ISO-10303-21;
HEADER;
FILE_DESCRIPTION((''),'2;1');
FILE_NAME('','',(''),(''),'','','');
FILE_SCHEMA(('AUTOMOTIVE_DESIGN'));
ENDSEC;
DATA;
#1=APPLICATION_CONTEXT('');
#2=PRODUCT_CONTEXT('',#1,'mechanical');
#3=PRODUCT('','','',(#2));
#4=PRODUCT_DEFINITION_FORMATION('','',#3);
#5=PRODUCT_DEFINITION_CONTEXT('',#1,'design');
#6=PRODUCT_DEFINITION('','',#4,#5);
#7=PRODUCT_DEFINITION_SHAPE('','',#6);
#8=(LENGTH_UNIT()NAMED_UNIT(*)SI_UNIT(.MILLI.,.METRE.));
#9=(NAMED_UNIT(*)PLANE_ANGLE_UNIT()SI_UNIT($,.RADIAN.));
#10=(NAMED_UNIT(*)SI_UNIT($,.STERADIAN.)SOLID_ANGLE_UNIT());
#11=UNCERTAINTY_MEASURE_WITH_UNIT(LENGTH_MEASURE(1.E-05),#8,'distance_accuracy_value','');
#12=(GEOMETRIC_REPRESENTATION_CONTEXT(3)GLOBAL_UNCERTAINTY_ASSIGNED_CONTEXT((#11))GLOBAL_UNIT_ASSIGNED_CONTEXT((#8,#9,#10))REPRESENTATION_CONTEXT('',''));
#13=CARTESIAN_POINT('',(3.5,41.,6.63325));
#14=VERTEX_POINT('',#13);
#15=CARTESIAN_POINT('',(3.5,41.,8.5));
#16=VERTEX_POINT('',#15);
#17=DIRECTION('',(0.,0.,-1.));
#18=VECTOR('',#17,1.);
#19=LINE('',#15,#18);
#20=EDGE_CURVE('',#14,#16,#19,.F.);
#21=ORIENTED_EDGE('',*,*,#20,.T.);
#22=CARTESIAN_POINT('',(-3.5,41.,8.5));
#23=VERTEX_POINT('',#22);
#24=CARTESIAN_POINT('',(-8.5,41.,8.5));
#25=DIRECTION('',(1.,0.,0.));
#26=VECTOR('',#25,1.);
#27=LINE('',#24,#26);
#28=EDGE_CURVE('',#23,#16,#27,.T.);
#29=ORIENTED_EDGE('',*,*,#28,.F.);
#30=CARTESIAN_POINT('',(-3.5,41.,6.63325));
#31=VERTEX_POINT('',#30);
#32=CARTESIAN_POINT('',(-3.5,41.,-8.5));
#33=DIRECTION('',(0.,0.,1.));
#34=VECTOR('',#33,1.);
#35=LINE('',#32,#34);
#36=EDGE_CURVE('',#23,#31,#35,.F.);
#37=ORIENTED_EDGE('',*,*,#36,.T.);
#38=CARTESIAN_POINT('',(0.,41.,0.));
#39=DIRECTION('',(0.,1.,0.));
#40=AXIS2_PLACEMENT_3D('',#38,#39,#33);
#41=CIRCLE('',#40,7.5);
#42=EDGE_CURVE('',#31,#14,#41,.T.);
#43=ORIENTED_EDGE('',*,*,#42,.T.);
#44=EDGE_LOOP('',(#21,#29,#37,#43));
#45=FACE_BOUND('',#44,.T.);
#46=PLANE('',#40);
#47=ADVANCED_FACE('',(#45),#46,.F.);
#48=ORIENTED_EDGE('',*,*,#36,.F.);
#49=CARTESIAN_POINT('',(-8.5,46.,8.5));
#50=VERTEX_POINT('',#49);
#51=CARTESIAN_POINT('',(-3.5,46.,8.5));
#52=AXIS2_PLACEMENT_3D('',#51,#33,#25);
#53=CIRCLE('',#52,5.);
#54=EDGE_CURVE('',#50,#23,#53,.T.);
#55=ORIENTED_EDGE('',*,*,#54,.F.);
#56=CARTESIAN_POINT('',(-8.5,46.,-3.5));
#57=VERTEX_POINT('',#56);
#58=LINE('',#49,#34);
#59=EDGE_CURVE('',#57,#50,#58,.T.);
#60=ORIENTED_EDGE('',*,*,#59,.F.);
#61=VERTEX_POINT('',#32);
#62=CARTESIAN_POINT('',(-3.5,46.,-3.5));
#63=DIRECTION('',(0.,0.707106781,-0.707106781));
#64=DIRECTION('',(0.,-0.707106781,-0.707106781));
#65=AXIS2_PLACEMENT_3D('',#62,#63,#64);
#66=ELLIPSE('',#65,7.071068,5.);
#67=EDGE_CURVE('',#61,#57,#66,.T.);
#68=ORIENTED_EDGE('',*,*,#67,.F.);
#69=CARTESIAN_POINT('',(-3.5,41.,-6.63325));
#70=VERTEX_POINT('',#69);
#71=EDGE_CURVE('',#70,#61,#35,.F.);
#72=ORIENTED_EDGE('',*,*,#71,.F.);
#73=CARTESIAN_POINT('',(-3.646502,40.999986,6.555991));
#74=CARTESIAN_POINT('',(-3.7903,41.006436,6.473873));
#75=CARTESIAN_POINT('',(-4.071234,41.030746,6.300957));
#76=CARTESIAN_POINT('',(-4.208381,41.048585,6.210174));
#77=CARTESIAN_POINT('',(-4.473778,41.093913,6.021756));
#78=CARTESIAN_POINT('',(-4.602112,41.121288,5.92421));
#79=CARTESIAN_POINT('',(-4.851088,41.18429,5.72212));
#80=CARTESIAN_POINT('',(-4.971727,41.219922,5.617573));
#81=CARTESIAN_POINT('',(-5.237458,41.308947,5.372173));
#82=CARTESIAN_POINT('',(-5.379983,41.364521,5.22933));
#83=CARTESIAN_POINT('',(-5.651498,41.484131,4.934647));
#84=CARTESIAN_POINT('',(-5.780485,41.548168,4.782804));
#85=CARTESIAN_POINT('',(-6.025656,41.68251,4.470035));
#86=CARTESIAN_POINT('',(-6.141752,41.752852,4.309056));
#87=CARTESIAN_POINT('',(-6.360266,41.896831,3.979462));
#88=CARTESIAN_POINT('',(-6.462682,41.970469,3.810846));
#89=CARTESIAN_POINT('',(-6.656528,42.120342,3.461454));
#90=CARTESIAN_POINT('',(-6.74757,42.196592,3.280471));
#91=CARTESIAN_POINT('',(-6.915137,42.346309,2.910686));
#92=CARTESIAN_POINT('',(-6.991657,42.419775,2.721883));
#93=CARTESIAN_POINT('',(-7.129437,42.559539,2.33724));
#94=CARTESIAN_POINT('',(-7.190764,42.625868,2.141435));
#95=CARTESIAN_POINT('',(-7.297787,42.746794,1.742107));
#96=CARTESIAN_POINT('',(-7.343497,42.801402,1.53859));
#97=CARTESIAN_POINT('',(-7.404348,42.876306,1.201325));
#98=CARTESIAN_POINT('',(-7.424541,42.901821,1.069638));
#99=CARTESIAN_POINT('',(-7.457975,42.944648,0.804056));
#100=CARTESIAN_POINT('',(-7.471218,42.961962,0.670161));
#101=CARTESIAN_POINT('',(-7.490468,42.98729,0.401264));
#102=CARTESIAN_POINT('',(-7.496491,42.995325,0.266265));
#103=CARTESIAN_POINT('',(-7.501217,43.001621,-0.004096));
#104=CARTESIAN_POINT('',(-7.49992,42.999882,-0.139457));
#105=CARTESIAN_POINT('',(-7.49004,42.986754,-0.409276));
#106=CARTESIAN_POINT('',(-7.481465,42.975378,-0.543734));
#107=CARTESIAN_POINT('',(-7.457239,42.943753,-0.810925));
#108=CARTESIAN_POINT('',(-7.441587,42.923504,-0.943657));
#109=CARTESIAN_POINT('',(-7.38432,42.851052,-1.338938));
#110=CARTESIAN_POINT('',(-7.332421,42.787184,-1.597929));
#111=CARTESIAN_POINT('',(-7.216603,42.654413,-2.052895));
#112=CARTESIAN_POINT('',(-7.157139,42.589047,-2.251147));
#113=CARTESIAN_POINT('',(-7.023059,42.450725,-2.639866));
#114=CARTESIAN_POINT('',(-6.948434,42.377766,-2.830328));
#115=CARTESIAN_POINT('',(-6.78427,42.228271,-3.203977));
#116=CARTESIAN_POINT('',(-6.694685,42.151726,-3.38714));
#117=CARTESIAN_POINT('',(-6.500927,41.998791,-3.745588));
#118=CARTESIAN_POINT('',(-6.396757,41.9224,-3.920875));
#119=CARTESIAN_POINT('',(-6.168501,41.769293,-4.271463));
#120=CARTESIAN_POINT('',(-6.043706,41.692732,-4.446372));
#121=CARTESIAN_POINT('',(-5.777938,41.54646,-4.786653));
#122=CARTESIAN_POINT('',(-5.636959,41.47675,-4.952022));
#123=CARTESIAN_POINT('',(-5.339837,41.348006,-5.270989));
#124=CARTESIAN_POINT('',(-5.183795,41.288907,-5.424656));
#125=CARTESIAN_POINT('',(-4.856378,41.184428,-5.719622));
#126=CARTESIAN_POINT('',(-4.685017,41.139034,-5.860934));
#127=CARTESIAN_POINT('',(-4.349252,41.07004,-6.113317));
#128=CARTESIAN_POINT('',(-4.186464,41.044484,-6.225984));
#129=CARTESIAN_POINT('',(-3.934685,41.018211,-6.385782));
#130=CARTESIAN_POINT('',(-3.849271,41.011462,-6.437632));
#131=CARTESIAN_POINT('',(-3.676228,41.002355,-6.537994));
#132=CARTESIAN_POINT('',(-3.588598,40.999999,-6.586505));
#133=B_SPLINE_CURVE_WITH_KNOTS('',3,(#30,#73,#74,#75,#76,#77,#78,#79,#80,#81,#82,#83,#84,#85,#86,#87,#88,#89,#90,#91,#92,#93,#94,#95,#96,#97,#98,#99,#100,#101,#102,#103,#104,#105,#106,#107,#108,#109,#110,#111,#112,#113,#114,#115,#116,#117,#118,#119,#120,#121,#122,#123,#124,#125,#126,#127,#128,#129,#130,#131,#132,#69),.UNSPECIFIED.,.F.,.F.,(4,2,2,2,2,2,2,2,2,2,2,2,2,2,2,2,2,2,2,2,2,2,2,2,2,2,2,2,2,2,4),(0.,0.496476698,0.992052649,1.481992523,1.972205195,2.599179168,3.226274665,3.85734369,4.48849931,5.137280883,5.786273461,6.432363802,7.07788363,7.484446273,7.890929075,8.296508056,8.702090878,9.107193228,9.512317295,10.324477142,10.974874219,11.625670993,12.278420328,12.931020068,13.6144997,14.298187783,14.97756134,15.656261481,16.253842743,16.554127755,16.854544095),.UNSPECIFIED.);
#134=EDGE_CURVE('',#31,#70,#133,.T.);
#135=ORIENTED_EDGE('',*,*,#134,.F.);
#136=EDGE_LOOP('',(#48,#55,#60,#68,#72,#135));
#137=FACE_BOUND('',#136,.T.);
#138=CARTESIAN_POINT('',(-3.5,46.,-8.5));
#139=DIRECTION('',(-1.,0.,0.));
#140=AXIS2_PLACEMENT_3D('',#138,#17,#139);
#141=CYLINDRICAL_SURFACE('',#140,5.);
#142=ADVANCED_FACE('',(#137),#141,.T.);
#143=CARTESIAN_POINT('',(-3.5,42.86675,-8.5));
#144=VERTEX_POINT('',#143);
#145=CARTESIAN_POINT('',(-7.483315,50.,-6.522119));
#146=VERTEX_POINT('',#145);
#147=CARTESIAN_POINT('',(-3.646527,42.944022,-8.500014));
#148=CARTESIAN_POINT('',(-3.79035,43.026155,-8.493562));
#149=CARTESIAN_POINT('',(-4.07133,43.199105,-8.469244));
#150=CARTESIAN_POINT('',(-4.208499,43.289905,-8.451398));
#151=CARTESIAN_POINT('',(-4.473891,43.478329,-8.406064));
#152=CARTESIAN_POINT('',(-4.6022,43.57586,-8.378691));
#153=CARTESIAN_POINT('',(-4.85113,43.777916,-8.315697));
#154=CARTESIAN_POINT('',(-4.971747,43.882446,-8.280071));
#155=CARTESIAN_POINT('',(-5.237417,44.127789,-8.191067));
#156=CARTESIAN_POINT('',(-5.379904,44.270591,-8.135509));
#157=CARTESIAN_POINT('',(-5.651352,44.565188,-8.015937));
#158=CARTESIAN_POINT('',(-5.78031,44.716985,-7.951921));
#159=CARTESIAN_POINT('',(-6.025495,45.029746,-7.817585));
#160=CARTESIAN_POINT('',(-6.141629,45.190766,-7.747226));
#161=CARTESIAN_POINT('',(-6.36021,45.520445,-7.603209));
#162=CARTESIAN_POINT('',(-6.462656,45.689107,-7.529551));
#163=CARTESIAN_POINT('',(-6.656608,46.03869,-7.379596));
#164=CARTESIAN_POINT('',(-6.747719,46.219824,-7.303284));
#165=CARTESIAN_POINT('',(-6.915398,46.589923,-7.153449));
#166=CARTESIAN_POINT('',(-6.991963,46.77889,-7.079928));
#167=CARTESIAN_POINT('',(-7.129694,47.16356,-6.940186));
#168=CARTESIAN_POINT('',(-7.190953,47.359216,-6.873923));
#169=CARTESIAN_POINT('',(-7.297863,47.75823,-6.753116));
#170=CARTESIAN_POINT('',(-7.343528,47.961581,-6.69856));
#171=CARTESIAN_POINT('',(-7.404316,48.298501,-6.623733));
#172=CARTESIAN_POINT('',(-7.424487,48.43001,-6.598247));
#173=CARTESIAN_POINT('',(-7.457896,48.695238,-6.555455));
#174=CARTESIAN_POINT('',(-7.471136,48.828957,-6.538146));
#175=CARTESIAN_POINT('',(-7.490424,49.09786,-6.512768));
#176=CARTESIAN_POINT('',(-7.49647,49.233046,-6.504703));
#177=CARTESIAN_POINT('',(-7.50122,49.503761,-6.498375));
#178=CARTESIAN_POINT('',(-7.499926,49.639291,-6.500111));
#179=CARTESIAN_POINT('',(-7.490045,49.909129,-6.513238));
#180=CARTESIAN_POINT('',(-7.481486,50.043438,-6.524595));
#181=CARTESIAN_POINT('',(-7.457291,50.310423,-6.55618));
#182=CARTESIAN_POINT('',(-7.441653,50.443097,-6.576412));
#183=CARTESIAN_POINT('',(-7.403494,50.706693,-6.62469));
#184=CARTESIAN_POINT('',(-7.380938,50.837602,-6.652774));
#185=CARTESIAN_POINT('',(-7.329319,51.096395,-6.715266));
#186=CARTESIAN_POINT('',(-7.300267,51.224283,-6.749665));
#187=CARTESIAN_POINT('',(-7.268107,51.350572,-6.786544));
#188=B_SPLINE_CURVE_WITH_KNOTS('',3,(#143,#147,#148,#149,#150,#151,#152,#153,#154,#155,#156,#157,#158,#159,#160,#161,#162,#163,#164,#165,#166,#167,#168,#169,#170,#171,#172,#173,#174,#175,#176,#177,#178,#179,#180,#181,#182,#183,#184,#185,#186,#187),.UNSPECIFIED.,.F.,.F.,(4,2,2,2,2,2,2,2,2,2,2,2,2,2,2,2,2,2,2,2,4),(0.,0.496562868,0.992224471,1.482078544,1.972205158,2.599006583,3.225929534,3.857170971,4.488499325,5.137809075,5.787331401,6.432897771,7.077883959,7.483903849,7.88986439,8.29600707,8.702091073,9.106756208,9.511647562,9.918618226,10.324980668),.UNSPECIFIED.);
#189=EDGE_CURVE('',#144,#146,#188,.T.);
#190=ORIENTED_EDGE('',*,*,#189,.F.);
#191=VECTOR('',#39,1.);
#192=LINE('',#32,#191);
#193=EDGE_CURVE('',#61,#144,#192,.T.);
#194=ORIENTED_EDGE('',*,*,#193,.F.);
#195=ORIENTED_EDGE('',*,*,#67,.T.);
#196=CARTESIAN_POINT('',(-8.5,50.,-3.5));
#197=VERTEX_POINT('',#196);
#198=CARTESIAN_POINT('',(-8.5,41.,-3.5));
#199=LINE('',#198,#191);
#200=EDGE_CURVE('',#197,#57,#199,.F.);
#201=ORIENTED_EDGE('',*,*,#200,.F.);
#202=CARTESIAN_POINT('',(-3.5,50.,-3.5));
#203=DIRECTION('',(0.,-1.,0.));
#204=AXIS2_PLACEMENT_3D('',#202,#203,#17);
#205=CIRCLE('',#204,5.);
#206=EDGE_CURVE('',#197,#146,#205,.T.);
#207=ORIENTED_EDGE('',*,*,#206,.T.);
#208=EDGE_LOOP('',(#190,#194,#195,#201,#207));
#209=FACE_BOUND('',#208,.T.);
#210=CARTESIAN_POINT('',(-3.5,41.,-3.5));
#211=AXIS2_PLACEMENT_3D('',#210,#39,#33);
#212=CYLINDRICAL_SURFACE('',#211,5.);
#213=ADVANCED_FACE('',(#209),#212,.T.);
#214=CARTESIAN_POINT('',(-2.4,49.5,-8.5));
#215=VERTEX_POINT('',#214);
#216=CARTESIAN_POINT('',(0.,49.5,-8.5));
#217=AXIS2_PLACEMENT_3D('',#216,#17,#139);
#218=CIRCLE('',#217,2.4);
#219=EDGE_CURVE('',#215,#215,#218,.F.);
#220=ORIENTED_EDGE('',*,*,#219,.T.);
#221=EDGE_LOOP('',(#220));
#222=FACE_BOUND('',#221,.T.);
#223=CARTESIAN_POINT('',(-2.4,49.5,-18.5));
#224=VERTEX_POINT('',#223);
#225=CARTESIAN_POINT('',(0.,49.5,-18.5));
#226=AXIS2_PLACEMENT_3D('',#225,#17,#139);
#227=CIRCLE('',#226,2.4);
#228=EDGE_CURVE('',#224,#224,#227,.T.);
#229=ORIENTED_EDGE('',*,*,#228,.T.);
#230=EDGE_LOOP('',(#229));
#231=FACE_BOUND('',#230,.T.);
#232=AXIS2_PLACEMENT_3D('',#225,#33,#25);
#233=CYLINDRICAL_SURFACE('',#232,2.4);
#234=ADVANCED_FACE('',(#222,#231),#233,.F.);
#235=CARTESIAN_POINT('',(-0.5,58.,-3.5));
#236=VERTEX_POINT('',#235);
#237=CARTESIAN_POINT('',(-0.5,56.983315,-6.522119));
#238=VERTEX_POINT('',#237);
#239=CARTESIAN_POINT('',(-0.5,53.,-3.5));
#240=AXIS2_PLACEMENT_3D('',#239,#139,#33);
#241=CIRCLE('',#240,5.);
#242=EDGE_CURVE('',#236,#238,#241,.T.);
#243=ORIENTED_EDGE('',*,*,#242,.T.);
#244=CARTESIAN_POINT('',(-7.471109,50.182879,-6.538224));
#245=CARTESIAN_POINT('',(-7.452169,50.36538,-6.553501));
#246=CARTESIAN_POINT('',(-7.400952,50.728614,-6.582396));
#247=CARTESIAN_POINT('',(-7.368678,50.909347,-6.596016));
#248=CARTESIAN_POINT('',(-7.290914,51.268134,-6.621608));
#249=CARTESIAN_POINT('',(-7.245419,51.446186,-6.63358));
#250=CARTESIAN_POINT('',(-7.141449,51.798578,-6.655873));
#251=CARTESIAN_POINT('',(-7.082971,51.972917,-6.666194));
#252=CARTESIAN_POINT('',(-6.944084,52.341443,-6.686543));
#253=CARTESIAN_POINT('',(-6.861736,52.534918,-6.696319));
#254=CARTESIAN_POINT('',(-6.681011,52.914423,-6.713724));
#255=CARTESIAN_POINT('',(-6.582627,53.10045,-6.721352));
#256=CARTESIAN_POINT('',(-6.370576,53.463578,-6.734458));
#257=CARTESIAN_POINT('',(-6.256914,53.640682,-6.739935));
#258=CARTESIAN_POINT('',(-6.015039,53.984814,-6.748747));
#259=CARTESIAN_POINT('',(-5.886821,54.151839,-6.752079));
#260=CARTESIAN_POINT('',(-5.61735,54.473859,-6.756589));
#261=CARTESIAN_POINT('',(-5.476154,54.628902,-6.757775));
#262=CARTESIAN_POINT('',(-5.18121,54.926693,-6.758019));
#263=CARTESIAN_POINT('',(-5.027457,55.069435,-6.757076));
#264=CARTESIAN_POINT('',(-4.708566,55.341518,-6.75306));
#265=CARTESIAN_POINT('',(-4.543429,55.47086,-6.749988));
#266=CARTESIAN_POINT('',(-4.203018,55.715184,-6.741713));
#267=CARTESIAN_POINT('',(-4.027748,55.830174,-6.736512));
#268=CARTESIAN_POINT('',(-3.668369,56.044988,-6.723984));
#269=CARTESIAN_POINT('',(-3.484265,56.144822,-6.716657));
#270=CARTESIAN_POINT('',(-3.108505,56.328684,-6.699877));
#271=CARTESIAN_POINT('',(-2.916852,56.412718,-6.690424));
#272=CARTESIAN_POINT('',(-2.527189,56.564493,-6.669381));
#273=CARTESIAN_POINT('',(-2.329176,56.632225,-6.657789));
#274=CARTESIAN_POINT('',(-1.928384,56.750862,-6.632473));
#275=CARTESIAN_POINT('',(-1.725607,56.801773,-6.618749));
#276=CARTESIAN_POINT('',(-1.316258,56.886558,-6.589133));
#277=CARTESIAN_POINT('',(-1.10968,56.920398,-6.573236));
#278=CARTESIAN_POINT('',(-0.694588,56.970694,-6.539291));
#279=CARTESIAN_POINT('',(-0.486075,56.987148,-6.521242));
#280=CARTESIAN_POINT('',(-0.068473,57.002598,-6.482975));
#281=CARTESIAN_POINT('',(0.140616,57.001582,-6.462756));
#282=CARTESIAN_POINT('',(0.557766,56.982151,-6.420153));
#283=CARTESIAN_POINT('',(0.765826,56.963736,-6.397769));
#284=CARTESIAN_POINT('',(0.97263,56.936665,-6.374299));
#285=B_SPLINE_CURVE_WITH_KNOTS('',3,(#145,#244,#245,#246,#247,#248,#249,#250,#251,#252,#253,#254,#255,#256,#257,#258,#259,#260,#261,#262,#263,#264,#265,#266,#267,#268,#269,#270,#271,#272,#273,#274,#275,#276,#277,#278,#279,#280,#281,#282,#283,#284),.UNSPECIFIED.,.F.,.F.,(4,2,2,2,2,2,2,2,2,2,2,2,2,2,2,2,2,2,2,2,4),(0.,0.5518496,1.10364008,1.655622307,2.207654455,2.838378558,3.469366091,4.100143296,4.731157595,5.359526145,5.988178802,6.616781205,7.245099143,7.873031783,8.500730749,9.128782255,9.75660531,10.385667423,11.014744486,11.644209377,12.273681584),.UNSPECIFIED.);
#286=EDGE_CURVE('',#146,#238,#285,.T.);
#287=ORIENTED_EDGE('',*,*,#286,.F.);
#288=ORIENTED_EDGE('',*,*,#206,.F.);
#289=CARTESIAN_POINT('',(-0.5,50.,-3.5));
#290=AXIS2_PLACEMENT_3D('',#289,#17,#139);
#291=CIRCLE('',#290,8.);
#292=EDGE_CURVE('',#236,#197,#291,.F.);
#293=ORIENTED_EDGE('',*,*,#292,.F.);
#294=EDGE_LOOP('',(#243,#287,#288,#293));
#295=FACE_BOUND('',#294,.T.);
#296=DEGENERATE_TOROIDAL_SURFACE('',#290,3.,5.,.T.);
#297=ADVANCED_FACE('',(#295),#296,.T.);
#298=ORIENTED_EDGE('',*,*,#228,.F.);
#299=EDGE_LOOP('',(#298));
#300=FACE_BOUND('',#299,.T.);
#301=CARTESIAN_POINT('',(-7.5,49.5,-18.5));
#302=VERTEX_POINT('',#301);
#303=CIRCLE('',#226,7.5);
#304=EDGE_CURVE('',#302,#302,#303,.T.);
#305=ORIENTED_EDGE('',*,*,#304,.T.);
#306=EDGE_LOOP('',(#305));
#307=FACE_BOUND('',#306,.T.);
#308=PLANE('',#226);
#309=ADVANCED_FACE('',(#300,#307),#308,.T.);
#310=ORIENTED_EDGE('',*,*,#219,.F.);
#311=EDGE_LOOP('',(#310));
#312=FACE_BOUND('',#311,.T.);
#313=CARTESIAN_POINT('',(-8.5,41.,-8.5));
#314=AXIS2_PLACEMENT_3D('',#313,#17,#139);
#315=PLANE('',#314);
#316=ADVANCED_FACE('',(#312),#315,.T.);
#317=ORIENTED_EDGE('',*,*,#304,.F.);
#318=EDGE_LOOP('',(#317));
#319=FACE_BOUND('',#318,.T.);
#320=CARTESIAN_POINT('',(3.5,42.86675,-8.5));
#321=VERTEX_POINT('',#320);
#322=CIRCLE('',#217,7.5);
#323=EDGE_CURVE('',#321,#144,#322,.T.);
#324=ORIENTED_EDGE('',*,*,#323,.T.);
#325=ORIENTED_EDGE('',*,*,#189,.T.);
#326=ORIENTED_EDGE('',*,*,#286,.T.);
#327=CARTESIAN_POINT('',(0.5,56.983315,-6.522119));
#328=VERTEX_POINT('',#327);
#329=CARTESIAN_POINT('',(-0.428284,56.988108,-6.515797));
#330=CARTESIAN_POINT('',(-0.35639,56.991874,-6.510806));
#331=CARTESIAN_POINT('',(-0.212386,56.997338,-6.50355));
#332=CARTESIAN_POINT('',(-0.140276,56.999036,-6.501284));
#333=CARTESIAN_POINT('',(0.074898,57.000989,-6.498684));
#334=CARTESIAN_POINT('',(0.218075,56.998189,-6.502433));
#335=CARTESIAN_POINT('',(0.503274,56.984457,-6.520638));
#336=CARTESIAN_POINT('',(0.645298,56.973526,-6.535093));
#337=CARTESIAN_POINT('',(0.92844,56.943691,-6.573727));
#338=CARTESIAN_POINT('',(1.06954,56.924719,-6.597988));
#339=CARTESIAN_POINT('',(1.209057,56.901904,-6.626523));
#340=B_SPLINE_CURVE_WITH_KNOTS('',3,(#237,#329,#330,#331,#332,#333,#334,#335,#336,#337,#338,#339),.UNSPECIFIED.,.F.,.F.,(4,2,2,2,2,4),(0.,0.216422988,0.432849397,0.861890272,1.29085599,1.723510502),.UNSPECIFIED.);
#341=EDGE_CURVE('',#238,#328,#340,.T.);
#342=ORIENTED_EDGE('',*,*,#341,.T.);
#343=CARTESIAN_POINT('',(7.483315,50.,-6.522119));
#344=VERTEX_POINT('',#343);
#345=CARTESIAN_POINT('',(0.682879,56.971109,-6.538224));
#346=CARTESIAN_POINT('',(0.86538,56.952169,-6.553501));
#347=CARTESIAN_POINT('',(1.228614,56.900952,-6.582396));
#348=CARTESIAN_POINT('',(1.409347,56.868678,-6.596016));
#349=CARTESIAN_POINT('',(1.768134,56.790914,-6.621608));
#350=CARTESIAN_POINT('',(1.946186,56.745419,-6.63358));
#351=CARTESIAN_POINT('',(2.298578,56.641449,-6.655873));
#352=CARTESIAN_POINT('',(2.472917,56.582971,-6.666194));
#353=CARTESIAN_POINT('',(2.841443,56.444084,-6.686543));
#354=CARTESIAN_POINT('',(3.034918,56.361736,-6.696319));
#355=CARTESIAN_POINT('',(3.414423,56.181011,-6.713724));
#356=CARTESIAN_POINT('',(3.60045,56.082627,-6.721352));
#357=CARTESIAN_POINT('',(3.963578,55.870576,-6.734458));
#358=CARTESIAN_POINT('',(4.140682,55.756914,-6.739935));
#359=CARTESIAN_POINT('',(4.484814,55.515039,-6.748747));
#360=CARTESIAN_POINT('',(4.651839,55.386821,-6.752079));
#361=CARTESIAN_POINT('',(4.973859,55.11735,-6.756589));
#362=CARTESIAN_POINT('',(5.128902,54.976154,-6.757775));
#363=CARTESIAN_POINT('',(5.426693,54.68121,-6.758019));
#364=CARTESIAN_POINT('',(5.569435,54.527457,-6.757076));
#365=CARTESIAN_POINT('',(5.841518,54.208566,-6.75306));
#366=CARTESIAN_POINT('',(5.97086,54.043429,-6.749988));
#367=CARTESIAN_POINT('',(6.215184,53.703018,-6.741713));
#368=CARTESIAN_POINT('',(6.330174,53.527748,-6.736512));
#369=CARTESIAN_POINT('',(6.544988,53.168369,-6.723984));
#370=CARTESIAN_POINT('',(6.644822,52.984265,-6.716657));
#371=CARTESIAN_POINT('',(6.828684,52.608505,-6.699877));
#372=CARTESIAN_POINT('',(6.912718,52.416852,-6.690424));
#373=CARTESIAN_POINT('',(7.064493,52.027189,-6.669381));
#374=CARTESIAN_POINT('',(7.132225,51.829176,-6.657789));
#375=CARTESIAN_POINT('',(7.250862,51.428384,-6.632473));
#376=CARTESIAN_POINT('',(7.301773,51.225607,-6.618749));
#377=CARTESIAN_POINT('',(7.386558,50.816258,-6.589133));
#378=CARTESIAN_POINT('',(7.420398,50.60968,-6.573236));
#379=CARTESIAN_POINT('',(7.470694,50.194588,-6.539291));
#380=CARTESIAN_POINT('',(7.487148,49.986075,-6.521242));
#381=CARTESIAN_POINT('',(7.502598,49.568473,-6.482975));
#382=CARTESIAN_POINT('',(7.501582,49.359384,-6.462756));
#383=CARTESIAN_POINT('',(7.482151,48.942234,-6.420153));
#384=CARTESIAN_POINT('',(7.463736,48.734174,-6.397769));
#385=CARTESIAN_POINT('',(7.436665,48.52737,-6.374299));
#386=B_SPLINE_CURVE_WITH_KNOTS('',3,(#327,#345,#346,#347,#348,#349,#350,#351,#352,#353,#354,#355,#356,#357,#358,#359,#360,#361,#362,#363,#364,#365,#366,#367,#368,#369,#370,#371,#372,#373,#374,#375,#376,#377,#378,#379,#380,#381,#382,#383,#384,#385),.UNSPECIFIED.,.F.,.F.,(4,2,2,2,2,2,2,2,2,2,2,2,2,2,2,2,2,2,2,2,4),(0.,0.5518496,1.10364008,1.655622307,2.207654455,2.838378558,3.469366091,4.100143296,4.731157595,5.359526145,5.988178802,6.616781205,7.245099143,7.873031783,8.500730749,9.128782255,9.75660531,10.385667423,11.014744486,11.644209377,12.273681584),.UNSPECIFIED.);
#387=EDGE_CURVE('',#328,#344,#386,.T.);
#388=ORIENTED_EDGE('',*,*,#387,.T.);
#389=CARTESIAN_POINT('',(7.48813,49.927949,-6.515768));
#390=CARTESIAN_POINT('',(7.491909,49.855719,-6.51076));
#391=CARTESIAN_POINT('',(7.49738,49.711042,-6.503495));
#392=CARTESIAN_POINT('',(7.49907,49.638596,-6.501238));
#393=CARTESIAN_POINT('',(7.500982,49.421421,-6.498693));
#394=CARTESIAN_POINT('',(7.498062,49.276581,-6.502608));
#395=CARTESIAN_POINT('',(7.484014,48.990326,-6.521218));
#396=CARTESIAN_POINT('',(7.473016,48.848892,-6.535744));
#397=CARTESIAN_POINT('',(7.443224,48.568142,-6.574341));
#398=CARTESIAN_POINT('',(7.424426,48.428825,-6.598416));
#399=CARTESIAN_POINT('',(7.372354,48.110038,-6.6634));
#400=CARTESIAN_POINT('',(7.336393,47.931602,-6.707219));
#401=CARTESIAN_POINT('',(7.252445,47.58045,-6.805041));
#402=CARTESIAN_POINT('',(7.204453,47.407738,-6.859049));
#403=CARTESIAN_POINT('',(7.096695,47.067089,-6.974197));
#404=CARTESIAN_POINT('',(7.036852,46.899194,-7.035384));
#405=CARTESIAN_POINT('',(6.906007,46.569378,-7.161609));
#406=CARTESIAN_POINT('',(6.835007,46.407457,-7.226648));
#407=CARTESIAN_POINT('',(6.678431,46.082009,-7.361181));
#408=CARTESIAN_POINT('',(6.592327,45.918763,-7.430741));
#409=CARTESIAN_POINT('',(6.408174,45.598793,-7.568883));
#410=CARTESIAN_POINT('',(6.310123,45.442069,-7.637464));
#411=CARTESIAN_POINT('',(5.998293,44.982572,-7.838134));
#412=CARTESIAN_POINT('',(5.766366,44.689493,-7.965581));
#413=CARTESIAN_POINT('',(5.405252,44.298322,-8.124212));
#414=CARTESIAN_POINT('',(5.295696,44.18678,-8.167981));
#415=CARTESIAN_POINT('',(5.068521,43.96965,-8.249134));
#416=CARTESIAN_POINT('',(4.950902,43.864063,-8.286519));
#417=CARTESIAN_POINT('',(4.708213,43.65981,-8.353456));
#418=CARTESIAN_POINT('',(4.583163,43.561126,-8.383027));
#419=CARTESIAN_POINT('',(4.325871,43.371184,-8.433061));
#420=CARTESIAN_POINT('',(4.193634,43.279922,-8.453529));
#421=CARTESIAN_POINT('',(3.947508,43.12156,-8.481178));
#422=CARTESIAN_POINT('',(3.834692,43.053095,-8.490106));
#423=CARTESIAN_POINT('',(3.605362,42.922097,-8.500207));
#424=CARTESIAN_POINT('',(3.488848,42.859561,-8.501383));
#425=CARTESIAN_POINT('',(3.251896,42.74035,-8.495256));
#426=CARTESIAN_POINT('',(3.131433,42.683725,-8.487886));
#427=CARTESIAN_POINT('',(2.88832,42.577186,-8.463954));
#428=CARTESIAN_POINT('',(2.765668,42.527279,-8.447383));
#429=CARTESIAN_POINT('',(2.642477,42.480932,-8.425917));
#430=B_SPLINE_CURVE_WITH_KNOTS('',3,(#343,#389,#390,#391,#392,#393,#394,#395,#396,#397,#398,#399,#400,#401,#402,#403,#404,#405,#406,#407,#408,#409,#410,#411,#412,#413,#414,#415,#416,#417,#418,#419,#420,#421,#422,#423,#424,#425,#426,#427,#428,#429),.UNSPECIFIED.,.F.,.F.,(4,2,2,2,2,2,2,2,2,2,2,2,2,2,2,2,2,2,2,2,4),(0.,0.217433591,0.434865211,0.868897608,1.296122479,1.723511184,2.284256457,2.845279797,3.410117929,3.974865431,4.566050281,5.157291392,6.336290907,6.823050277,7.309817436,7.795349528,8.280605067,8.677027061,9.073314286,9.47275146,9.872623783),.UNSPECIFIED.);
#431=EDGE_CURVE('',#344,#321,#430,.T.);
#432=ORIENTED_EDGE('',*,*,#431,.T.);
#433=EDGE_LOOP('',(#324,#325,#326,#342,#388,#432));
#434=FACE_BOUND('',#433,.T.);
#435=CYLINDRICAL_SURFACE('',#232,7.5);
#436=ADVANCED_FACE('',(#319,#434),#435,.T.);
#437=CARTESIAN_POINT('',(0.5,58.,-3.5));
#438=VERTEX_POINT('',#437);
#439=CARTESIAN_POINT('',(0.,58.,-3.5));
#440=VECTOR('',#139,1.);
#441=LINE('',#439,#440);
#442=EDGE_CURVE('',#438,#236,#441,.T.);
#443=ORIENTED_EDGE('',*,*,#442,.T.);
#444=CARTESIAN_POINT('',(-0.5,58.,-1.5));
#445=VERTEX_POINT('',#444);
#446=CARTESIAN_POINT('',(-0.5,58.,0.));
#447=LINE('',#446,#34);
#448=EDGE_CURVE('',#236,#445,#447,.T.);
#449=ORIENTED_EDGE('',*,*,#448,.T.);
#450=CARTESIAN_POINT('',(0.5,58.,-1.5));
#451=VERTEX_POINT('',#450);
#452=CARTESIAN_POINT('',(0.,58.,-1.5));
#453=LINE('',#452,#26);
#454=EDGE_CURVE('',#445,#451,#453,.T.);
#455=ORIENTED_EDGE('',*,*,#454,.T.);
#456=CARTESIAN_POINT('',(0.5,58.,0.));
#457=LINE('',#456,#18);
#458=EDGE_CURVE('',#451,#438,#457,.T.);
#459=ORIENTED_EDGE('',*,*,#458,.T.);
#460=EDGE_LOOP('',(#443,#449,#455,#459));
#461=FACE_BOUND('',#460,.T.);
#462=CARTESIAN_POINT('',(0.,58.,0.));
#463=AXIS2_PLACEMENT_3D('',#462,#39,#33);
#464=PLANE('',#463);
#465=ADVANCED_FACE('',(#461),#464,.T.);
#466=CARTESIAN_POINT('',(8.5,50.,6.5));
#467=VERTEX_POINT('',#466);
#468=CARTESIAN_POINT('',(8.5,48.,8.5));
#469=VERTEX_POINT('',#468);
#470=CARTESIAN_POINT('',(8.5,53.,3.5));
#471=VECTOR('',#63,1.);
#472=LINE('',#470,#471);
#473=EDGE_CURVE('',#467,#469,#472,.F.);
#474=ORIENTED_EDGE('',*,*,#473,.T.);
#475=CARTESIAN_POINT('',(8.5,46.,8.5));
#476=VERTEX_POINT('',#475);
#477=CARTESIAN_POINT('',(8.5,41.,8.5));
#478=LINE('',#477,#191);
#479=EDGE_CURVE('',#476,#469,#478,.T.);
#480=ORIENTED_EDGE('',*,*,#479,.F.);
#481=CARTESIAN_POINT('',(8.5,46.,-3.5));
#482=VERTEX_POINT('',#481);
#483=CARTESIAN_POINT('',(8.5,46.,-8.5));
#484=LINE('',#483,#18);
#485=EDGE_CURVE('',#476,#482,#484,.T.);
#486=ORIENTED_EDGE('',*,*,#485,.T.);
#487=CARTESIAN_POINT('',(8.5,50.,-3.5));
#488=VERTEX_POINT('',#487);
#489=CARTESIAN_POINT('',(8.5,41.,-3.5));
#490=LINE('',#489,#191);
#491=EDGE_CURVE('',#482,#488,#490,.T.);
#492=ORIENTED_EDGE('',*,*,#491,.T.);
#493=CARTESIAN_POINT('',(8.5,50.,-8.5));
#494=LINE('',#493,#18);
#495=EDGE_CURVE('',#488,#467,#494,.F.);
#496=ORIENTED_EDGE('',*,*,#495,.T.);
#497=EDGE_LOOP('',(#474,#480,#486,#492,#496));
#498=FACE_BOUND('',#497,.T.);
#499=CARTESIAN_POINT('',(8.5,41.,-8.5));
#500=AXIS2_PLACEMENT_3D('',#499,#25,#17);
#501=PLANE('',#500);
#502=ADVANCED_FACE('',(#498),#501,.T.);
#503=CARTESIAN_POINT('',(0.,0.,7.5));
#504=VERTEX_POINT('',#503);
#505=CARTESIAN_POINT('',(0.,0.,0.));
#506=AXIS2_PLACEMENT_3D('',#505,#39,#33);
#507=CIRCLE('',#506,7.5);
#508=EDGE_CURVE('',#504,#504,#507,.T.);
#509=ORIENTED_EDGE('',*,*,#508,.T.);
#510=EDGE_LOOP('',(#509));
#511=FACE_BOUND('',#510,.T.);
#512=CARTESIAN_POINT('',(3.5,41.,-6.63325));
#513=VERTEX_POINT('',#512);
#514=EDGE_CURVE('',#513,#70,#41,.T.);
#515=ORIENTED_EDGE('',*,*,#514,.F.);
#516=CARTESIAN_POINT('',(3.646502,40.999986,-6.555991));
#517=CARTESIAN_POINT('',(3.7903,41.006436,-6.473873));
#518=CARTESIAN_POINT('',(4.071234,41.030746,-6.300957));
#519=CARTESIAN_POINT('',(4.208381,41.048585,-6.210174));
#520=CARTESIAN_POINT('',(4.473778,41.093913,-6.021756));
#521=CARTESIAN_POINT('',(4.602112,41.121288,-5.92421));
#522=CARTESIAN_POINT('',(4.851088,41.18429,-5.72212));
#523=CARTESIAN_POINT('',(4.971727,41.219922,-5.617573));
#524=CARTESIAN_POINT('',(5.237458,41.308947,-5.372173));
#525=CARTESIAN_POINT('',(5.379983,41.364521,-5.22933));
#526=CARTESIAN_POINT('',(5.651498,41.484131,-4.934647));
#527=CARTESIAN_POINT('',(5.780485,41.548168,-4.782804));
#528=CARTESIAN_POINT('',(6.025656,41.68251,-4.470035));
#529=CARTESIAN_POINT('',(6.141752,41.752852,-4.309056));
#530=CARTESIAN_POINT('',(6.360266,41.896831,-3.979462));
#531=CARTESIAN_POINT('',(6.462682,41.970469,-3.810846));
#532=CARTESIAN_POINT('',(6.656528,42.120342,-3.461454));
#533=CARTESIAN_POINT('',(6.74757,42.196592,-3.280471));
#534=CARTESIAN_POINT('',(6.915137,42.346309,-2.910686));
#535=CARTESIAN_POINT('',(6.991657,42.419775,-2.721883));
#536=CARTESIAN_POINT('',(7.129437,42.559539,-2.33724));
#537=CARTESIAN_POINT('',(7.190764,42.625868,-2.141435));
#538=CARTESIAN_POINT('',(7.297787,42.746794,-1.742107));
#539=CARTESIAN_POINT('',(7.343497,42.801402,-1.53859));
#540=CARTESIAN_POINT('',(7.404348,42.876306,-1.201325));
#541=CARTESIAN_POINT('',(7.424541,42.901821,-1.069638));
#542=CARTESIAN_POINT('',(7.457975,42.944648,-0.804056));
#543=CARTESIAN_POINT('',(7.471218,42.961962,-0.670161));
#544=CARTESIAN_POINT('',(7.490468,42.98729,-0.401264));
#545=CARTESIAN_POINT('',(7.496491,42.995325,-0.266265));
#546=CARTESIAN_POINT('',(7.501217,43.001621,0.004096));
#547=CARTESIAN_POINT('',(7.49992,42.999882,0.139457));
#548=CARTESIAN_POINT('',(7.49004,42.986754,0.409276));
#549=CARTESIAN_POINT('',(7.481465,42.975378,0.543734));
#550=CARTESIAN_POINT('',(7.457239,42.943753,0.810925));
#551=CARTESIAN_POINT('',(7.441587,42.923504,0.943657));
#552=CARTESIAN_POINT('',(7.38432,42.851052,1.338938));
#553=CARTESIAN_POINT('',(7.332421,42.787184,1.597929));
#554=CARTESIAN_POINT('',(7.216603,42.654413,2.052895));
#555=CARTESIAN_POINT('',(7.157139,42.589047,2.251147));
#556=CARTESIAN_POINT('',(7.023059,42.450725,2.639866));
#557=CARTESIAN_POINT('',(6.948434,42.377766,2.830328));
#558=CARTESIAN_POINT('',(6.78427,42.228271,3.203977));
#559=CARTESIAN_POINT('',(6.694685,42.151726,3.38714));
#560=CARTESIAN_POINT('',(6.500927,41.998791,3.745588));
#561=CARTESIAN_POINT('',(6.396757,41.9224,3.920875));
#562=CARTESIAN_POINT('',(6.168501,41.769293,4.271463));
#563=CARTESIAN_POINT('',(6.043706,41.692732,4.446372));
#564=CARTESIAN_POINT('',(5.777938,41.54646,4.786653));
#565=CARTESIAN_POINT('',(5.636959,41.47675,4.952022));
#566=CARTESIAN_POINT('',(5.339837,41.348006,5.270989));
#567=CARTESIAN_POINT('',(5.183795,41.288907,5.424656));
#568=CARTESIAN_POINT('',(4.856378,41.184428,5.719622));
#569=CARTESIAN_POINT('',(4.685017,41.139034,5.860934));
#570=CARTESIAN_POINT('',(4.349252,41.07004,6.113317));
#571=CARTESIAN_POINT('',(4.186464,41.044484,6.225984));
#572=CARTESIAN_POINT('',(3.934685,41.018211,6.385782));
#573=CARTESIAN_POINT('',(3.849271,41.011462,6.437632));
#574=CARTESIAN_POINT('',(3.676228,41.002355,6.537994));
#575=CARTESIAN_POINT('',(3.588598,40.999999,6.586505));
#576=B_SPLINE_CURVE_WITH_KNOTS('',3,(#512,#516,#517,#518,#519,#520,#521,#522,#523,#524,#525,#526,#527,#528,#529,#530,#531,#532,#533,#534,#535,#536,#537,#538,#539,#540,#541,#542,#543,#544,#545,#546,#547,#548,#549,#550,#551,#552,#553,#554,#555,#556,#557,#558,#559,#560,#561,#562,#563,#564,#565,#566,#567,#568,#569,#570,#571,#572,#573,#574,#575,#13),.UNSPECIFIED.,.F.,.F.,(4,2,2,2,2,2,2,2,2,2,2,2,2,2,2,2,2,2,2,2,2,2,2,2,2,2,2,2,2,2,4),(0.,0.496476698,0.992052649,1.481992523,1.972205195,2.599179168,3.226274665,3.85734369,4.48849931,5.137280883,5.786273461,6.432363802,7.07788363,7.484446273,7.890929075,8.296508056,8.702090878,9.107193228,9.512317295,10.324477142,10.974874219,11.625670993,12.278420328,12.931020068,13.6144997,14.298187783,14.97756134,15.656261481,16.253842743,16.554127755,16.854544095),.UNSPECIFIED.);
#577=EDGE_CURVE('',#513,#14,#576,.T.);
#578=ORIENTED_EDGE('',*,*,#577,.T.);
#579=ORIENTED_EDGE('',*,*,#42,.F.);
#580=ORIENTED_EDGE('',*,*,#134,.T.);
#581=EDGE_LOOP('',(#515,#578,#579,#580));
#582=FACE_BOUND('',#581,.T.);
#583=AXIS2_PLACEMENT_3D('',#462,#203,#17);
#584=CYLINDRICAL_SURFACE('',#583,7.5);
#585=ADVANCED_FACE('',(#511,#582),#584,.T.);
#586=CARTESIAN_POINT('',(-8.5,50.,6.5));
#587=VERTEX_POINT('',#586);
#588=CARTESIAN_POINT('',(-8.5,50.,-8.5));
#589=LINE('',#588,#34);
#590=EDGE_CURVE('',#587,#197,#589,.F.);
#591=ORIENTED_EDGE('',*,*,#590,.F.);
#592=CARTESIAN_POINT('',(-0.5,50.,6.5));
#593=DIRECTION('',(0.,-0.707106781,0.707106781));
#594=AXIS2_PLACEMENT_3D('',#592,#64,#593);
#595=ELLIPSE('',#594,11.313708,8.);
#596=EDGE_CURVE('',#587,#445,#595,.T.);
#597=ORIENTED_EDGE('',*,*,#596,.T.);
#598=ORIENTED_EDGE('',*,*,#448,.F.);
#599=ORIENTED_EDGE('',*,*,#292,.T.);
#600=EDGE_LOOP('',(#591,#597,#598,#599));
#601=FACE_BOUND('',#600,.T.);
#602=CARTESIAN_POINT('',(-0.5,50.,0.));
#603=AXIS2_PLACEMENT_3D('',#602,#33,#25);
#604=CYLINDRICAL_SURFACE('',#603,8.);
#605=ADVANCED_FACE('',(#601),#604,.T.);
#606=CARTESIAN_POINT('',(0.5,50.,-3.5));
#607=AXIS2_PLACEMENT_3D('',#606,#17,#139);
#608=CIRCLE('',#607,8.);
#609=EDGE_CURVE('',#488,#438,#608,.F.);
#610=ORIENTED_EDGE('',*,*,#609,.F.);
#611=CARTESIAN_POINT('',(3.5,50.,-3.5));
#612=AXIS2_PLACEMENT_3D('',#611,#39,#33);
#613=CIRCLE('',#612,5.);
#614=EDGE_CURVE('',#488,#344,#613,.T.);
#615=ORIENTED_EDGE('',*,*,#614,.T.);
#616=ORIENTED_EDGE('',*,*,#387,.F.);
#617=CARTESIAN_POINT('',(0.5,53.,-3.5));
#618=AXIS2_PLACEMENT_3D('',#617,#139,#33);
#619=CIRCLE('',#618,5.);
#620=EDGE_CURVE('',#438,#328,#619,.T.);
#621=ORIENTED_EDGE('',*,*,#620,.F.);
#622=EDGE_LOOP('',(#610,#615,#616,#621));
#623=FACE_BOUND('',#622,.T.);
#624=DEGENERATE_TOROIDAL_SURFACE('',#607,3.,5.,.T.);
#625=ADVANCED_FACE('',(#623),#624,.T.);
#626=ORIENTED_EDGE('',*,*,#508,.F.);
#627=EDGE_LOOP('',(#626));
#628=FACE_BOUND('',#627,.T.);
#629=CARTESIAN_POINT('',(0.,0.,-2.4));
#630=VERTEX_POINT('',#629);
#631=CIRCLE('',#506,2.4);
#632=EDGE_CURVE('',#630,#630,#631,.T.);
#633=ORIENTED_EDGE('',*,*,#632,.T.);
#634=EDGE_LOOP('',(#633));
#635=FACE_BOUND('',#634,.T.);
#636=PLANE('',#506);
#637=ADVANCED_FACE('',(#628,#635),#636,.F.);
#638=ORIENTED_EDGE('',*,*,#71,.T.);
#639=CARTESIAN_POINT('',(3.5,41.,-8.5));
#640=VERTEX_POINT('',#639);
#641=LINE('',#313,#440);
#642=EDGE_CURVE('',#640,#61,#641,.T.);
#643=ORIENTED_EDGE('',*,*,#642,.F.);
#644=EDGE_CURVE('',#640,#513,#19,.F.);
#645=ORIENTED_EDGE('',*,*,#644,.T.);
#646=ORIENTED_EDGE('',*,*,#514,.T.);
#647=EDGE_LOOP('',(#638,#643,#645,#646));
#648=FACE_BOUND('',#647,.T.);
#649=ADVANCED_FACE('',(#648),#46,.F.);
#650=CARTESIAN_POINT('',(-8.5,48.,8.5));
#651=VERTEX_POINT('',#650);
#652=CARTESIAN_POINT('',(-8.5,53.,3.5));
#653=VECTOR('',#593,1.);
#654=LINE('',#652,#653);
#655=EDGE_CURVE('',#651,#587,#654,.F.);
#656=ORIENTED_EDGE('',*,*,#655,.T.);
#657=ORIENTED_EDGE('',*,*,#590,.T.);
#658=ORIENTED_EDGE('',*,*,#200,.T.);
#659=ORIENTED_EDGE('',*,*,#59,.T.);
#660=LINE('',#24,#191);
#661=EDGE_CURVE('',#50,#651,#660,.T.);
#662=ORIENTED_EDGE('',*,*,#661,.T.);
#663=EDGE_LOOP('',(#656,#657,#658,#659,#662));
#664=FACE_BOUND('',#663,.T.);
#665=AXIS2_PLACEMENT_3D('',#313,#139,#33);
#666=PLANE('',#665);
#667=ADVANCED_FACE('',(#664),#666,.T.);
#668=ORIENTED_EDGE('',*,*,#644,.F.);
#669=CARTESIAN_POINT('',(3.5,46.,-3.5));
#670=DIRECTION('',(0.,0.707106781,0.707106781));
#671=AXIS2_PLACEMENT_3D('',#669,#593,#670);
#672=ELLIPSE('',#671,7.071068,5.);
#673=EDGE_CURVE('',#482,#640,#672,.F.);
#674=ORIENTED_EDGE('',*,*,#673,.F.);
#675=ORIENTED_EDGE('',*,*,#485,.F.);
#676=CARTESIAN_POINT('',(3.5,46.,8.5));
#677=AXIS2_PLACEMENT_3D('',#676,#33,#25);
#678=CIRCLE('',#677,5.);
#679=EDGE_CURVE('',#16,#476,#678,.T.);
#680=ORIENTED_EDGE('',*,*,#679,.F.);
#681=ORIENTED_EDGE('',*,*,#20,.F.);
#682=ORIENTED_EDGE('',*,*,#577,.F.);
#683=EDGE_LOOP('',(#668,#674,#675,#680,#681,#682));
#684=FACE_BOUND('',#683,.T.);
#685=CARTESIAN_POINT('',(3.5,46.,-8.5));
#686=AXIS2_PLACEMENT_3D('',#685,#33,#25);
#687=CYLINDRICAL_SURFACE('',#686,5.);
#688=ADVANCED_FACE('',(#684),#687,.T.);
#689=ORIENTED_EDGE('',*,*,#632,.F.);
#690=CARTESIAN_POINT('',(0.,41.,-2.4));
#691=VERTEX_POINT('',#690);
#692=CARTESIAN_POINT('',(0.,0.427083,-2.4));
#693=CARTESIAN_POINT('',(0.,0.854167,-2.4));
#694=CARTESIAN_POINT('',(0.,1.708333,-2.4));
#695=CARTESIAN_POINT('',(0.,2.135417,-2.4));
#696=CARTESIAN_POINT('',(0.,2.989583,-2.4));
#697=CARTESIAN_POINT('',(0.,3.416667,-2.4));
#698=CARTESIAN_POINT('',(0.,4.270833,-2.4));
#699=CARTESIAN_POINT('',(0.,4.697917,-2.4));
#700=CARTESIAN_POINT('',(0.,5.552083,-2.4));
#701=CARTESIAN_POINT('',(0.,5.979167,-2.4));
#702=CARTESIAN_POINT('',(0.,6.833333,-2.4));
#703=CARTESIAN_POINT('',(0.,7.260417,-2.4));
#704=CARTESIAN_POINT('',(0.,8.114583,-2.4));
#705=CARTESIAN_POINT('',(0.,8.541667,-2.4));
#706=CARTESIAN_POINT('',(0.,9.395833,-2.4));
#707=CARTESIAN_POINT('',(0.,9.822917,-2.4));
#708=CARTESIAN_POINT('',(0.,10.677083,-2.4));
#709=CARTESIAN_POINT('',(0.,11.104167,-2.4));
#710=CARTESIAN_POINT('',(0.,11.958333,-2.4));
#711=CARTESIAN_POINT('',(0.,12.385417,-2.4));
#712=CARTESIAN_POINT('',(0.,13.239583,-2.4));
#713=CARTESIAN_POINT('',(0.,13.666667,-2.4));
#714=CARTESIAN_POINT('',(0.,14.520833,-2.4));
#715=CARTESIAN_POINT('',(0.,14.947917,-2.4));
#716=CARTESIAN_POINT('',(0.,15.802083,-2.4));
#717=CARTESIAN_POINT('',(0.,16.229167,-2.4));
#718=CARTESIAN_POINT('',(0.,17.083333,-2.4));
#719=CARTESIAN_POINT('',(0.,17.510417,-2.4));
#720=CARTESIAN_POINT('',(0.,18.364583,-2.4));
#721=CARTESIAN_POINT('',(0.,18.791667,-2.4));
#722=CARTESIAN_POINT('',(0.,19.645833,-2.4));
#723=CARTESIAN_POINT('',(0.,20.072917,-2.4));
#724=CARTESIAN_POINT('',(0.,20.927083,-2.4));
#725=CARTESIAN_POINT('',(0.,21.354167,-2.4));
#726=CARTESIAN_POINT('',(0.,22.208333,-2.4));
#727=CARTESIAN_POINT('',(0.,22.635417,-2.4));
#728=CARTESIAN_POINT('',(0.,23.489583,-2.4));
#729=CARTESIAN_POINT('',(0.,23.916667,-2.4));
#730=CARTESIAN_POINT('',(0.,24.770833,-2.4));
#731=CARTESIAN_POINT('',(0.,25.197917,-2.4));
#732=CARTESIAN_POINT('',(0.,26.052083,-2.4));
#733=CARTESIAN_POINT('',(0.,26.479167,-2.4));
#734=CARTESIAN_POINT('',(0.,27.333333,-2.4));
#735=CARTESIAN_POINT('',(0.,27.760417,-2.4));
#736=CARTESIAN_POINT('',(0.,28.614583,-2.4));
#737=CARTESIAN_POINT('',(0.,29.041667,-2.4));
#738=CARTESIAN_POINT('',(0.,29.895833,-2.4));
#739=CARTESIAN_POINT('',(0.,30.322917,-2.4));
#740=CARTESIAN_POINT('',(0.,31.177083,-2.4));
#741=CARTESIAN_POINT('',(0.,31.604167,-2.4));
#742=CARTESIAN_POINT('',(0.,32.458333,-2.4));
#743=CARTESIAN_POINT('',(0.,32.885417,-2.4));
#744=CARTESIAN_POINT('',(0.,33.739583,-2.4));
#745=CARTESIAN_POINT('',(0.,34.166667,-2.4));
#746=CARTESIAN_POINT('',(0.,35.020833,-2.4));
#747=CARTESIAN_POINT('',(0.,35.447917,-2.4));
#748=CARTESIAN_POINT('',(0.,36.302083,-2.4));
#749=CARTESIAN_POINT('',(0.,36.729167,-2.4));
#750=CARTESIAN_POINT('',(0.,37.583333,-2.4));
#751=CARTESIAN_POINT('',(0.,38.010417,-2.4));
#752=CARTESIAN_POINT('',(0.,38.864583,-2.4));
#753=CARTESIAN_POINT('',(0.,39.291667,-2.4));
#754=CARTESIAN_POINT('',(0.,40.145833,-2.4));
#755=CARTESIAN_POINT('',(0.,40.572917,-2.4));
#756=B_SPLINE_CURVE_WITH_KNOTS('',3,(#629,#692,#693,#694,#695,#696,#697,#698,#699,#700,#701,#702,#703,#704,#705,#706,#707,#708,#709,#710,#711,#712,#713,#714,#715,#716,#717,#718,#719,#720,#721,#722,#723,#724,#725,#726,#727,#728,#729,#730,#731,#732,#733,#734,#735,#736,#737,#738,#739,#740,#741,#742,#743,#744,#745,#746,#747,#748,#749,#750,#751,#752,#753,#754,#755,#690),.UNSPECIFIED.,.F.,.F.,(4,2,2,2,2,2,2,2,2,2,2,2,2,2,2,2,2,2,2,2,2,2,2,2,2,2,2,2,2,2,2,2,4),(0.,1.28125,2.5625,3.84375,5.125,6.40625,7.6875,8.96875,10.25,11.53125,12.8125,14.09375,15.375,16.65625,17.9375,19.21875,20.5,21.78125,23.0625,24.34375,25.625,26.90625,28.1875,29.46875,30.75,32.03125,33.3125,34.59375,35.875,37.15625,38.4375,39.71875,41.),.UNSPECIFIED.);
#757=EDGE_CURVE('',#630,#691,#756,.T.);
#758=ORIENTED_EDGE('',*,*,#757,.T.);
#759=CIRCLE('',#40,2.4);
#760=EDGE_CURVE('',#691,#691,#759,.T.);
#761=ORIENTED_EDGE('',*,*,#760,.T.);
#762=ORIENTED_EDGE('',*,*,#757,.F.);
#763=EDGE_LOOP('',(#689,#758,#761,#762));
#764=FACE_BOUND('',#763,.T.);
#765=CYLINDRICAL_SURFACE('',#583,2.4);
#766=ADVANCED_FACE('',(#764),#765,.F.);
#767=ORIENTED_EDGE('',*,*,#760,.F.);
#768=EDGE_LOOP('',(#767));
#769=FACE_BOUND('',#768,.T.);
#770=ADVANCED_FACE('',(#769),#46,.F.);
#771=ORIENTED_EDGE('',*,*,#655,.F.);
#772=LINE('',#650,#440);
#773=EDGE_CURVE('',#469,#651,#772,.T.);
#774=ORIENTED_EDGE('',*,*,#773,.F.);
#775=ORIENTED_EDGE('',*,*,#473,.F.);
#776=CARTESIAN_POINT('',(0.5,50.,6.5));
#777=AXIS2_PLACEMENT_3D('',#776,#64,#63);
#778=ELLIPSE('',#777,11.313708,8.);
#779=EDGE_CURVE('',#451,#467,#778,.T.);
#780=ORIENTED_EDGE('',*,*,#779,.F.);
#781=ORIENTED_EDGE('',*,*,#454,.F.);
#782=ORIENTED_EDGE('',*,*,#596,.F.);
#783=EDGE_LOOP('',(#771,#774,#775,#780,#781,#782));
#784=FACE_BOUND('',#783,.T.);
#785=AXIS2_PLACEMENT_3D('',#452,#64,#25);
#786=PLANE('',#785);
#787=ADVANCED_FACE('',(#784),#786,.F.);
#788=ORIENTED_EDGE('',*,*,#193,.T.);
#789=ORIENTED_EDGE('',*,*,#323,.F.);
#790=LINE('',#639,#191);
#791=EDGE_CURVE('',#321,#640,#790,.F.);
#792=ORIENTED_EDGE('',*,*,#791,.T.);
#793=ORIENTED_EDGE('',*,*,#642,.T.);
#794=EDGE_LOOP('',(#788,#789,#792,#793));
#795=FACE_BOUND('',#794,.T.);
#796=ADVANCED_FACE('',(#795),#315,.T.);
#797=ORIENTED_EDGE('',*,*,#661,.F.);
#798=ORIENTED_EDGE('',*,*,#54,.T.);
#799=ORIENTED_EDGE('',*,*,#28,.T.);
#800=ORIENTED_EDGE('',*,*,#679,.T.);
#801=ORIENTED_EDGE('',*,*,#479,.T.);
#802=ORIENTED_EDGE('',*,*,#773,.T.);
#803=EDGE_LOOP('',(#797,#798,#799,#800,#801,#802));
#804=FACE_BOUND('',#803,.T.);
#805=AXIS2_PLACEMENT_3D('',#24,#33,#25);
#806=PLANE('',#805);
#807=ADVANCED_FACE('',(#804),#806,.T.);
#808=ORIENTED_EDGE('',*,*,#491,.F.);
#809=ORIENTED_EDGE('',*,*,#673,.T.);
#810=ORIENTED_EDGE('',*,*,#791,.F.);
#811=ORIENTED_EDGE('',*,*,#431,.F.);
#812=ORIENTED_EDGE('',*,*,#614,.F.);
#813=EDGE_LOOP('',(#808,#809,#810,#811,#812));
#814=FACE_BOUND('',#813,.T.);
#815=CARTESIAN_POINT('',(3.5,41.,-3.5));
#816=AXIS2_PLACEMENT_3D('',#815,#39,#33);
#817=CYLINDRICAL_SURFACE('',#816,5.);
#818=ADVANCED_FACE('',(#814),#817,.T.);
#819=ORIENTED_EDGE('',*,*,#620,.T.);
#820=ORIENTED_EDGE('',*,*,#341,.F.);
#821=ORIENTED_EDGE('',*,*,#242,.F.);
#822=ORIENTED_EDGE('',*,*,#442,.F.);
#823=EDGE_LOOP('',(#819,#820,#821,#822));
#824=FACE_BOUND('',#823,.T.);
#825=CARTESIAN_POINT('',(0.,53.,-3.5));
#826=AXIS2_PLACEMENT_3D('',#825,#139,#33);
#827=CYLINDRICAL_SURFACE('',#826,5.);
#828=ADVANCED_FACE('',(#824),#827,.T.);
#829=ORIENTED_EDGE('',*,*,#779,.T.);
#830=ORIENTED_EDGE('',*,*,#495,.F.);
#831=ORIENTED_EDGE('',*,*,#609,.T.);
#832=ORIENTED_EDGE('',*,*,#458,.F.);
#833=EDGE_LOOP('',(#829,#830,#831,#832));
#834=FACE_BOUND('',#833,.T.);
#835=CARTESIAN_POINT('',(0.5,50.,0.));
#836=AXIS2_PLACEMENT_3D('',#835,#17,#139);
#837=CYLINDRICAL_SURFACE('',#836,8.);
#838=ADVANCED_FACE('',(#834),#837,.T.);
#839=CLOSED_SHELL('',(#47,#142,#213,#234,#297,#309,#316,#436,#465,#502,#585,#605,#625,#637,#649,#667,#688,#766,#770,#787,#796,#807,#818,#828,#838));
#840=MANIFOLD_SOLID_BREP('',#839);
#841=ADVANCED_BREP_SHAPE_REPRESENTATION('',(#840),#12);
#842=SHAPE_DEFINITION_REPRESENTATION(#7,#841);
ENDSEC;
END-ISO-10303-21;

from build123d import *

# Parameters (mm, degrees)
SKETCH1_R           = 7.5
SKETCH1_R_2         = 2.4
BOSS_EXTRUDE1_DEPTH = 58
SKETCH2_W           = 17
SKETCH2_H           = 17
BOSS_EXTRUDE2_DEPTH = 17
SKETCH3_R           = 7.5
SKETCH3_R_2         = 2.4
BOSS_EXTRUDE3_DEPTH = 10
FILLET5_R           = 8
CHAMFER1_SIZE       = 10
FILLET4_R           = 5


with BuildPart() as part:
    # Sketch1 → Boss-Extrude1 (new body)
    with BuildSketch(Plane(origin=(0, 0, 0), x_dir=(1, 0, 0), z_dir=(0, 1, 0))):
        with Locations(Location((0, 0, 0), (0, 0, 90))):
            Circle(SKETCH1_R)
        with Locations(Location((0, 0, 0), (0, 0, 90))):
            Circle(SKETCH1_R_2, mode=Mode.SUBTRACT)
    extrude(amount=BOSS_EXTRUDE1_DEPTH)

    # Sketch2 → Boss-Extrude2 (add)
    with BuildSketch(Plane(origin=(0, 58, 0), x_dir=(1, 0, 0), z_dir=(0, 1, 0))):
        Rectangle(SKETCH2_W, SKETCH2_H)
    extrude(amount=-BOSS_EXTRUDE2_DEPTH)

    # Sketch3 → Boss-Extrude3 (add)
    with BuildSketch(Plane(origin=(0, 0, -8.5), x_dir=(-1, 0, 0), z_dir=(0, 0, -1))):
        with Locations((0, 49.5)):
            Circle(SKETCH3_R)
        with Locations((0, 49.5)):
            Circle(SKETCH3_R_2, mode=Mode.SUBTRACT)
    extrude(amount=BOSS_EXTRUDE3_DEPTH)

    # Fillet5
    fillet5_edges = [part.edges().sort_by_distance(p)[0] for p in [
        (8.5, 58, 0),
        (-8.5, 58, 0),
    ]]
    fillet(fillet5_edges, radius=FILLET5_R)

    # Chamfer1
    # the kernel refuses this chamfer: 10 mm, written as the material it takes off along each edge
    with BuildSketch(Plane(origin=(26.21682988, 58, 8.5), x_dir=(0, 0.027495876610586317, -0.9996219169112968), z_dir=(-1, 0, 0))) as chamfer1_piece_1:
        Polygon((CHAMFER1_SIZE * 0.999621916911, CHAMFER1_SIZE * 0.0274958766106), (-CHAMFER1_SIZE * 0.0274958766106, CHAMFER1_SIZE * 0.999621916911), (0, 0), align=None)
    extrude(amount=52.433659759, mode=Mode.SUBTRACT)

    # Fillet4
    # the kernel refuses this fillet: 5 mm, written as the material it takes off along each edge
    with BuildSketch(Plane(origin=(-8.5, 50, -8.5), x_dir=(1, 0, 0), z_dir=(0, -1, 0))) as fillet4_piece_1_section:
        with BuildLine():
            CenterArc((FILLET4_R, FILLET4_R), FILLET4_R, 180, 90)
            Line((0, FILLET4_R), (0, 0))
            Line((0, 0), (FILLET4_R, 0))
        make_face()
    fillet4_piece_1 = extrude(amount=21.5, mode=Mode.PRIVATE)
    fillet4_piece_1 = fillet4_piece_1 - Plane(origin=(0, 49.5, -7.300599215), x_dir=(-1, 0, 0), z_dir=(0, 0, 1)) * Cylinder(7.5, 64, mode=Mode.PRIVATE)
    add(fillet4_piece_1, mode=Mode.SUBTRACT)
    with BuildSketch(Plane(origin=(8.5, 50, -8.5), x_dir=(-1, 0, 0), z_dir=(0, -1, 0))) as fillet4_piece_2_section:
        with BuildLine():
            CenterArc((FILLET4_R, -FILLET4_R), FILLET4_R, 90, 90)
            Line((0, -FILLET4_R), (0, 0))
            Line((0, 0), (FILLET4_R, 0))
        make_face()
    fillet4_piece_2 = extrude(amount=21.5, mode=Mode.PRIVATE)
    fillet4_piece_2 = fillet4_piece_2 - Plane(origin=(0, 49.5, -7.300599064), x_dir=(-1, 0, 0), z_dir=(0, 0, 1)) * Cylinder(7.5, 63, mode=Mode.PRIVATE)
    add(fillet4_piece_2, mode=Mode.SUBTRACT)
    with BuildSketch(Plane(origin=(8.5, 41, -21), x_dir=(-1, 0, 0), z_dir=(0, 0, 1))) as fillet4_piece_3_section:
        with BuildLine():
            CenterArc((FILLET4_R, -FILLET4_R), FILLET4_R, 90, 90)
            Line((0, -FILLET4_R), (0, 0))
            Line((0, 0), (FILLET4_R, 0))
        make_face()
    fillet4_piece_3 = extrude(amount=42, mode=Mode.PRIVATE)
    fillet4_piece_3 = fillet4_piece_3 - Plane(origin=(0, 41.109676193, 0), x_dir=(0, 0, -1), z_dir=(0, -1, 0)) * Cylinder(7.5, 104, mode=Mode.PRIVATE)
    add(fillet4_piece_3, mode=Mode.SUBTRACT)
    with BuildSketch(Plane(origin=(-8.5, 41, 21), x_dir=(0, 1, 0), z_dir=(0, 0, -1))) as fillet4_piece_4_section:
        with BuildLine():
            CenterArc((FILLET4_R, FILLET4_R), FILLET4_R, 180, 90)
            Line((0, FILLET4_R), (0, 0))
            Line((0, 0), (FILLET4_R, 0))
        make_face()
    fillet4_piece_4 = extrude(amount=42, mode=Mode.PRIVATE)
    fillet4_piece_4 = fillet4_piece_4 - Plane(origin=(0, 44.689641685, 0), x_dir=(0, 0, -1), z_dir=(0, -1, 0)) * Cylinder(7.5, 104, mode=Mode.PRIVATE)
    add(fillet4_piece_4, mode=Mode.SUBTRACT)
    with BuildSketch(Plane(origin=(0.5, 50, -8.5), x_dir=(1, 0, 0), z_dir=(0, -1, 0))) as fillet4_piece_5_section:
        with BuildLine():
            CenterArc((8 - FILLET4_R, FILLET4_R), FILLET4_R, 270, 90)
            Line((8, FILLET4_R), (8, 0))
            Line((8, 0), (8 - FILLET4_R, 0))
        make_face()
    fillet4_piece_5 = revolve(axis=Axis((0.5, 50, -8.5), (0, 0, 1)), revolution_arc=90, mode=Mode.PRIVATE)
    fillet4_piece_5 = fillet4_piece_5 - Plane(origin=(0, 49.5, -6.88973409), x_dir=(-1, 0, 0), z_dir=(0, 0, 1)) * Cylinder(7.5, 33, mode=Mode.PRIVATE)
    add(fillet4_piece_5, mode=Mode.SUBTRACT)
    with BuildSketch(Plane(origin=(-0.5, 58, -8.5), x_dir=(0, -1, 0), z_dir=(1, 0, 0))) as fillet4_piece_6_section:
        with BuildLine():
            CenterArc((FILLET4_R, -FILLET4_R), FILLET4_R, 90, 90)
            Line((0, -FILLET4_R), (0, 0))
            Line((0, 0), (FILLET4_R, 0))
        make_face()
    fillet4_piece_6 = extrude(amount=1, mode=Mode.PRIVATE)
    fillet4_piece_6 = fillet4_piece_6 - Plane(origin=(0, 49.5, -6.859352055), x_dir=(-1, 0, 0), z_dir=(0, 0, 1)) * Cylinder(7.5, 23, mode=Mode.PRIVATE)
    add(fillet4_piece_6, mode=Mode.SUBTRACT)
    with BuildSketch(Plane(origin=(-0.5, 50, -8.5), x_dir=(-1, 0, 0), z_dir=(0, -1, 0))) as fillet4_piece_7_section:
        with BuildLine():
            CenterArc((8 - FILLET4_R, -FILLET4_R), FILLET4_R, 0, 90)
            Line((8, -FILLET4_R), (8, 0))
            Line((8, 0), (8 - FILLET4_R, 0))
        make_face()
    fillet4_piece_7 = revolve(axis=Axis((-0.5, 50, -8.5), (0, 0, -1)), revolution_arc=90, mode=Mode.PRIVATE)
    fillet4_piece_7 = fillet4_piece_7 - Plane(origin=(0, 49.5, -6.889734089), x_dir=(-1, 0, 0), z_dir=(0, 0, 1)) * Cylinder(7.5, 32, mode=Mode.PRIVATE)
    add(fillet4_piece_7, mode=Mode.SUBTRACT)


solid = part.part
